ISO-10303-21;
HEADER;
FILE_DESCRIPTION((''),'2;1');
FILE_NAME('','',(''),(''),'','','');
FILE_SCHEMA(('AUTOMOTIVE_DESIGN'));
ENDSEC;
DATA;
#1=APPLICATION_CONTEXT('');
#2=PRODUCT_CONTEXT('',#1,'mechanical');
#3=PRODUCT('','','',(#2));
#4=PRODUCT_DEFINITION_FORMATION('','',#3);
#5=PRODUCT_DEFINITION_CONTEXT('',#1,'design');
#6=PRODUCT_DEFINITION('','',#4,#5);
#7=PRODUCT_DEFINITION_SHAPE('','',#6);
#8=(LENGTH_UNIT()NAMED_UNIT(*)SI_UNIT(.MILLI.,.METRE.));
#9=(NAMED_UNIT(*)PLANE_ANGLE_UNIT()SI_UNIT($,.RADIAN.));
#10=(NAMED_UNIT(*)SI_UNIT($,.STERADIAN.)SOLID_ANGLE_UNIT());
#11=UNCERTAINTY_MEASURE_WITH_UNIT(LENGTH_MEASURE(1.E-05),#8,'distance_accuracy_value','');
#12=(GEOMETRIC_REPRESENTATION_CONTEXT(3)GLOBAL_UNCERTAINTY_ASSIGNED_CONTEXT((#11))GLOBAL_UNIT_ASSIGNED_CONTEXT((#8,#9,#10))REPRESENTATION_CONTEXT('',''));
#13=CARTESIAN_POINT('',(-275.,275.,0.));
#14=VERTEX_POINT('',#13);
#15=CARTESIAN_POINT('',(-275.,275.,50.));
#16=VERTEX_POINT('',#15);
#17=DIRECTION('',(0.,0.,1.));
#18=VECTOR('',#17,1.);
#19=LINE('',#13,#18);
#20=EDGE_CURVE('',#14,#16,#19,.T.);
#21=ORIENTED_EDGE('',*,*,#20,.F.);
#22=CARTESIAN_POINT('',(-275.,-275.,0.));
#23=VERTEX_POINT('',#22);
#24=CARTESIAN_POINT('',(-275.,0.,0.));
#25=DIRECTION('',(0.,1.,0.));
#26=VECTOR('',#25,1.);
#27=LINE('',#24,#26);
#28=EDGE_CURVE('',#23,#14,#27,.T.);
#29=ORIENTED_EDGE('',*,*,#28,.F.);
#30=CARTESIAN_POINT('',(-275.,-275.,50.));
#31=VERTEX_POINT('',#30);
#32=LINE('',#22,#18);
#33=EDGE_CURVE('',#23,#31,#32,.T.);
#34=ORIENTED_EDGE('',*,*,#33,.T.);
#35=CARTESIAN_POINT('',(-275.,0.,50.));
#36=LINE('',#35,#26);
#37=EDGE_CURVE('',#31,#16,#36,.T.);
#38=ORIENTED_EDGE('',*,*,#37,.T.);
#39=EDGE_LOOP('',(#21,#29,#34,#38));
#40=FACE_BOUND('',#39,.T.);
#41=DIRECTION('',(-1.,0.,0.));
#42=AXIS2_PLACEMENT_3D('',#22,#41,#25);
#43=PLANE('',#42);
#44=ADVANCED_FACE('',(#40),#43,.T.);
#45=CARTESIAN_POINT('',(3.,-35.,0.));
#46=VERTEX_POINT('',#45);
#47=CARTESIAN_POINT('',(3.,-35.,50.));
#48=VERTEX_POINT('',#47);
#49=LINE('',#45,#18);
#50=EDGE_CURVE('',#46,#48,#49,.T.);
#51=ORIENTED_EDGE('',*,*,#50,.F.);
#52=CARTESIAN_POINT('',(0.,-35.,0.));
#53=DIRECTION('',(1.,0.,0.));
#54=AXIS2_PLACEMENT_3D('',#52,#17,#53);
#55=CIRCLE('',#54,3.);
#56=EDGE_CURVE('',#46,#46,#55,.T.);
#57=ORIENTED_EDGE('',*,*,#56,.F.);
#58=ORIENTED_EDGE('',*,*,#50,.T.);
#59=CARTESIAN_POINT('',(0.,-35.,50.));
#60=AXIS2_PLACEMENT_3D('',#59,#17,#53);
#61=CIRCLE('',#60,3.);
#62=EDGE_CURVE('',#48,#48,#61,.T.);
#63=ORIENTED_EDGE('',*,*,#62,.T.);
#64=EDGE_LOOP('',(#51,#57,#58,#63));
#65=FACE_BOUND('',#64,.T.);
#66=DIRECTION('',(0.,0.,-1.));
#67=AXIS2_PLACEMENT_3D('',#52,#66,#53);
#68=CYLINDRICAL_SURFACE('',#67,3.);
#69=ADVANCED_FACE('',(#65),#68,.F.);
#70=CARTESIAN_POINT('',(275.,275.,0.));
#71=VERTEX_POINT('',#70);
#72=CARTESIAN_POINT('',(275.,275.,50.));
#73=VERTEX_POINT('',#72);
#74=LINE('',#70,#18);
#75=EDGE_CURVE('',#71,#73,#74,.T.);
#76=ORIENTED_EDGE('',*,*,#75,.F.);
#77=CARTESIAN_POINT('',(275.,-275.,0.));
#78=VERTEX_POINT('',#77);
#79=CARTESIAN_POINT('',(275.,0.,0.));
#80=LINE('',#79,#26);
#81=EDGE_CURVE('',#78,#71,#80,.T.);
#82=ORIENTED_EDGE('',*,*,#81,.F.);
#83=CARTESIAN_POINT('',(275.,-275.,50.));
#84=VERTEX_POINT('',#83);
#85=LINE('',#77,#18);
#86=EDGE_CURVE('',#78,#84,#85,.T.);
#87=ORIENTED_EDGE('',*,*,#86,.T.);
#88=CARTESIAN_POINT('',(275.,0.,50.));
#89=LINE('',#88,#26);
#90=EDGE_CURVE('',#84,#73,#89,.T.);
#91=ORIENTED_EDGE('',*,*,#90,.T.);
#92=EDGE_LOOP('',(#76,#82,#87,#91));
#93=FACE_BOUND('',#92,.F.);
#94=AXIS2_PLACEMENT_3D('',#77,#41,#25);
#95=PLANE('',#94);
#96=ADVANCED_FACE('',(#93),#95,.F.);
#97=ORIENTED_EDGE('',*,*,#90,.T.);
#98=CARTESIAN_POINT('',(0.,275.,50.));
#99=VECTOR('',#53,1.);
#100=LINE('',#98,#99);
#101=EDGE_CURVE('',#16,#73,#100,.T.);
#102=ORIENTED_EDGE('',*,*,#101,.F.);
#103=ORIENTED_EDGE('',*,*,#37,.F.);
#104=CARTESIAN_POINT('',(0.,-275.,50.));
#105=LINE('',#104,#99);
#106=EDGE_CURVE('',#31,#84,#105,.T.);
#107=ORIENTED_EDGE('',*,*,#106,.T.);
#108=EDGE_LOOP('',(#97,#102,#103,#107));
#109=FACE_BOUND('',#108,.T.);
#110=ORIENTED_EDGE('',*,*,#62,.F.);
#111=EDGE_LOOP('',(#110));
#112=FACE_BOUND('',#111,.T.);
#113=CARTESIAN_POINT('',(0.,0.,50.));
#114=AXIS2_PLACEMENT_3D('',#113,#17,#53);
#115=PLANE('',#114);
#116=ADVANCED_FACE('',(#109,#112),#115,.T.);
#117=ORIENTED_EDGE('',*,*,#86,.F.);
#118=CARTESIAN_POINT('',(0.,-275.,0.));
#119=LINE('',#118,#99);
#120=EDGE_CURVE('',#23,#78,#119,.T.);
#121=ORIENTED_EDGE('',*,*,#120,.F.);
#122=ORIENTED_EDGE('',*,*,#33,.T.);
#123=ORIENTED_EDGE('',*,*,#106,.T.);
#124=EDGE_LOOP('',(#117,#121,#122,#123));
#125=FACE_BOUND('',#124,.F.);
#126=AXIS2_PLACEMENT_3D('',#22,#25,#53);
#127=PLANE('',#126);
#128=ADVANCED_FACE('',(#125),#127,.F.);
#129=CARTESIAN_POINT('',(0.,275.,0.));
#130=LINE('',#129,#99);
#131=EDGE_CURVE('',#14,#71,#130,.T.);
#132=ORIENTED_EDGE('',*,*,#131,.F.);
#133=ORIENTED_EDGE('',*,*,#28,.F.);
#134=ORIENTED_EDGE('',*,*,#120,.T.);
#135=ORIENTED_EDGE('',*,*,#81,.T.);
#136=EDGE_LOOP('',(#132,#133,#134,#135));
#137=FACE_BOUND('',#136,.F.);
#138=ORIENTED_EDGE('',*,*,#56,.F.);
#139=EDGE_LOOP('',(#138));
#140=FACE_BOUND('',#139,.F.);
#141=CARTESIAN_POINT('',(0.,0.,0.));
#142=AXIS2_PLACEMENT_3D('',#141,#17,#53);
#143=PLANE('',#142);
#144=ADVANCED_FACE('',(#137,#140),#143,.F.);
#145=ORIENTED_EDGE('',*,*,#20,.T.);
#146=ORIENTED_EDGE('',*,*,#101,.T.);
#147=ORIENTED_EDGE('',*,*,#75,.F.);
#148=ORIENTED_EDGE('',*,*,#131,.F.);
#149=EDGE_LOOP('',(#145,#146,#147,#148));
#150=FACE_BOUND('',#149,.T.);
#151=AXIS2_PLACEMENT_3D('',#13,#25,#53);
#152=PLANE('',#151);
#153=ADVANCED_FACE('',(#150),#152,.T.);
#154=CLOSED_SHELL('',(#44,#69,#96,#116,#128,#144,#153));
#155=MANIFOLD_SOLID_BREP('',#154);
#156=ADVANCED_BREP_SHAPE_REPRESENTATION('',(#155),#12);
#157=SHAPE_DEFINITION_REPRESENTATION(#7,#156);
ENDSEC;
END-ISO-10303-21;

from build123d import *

# Parameters (mm, degrees)
F0_W     = 550
F0_H     = 550
F0_R     = 3
F0_W_2   = 50
F0_H_2   = 50
F1_DEPTH = 50


with BuildPart() as f1:
    # F0 (on Top) → F1 (new body)
    with BuildSketch(Plane.XY):
        Rectangle(F0_W, F0_H)
        Polygon((222.5, 272.5), (272.5, 272.5), (272.5, 222.5), (272.5, -222.5), (272.5, -272.5), (222.5, -272.5), (-222.5, -272.5), (-272.5, -272.5), (-272.5, -222.5), (-272.5, 222.5), (-272.5, 272.5), (-222.5, 272.5), align=None, mode=Mode.SUBTRACT)
        Polygon((222.5, 222.5), (222.5, 272.5), (-222.5, 272.5), (-222.5, 222.5), (-272.5, 222.5), (-272.5, -222.5), (-222.5, -222.5), (-222.5, -272.5), (222.5, -272.5), (222.5, -222.5), (272.5, -222.5), (272.5, 222.5), align=None)
        with Locations((0, -35)):
            Circle(F0_R, mode=Mode.SUBTRACT)
        with Locations((-247.5, 247.5)):
            Rectangle(F0_W_2, F0_H_2)
        with Locations((247.5, -247.5)):
            Rectangle(F0_W_2, F0_H_2)
        with Locations((247.5, 247.5)):
            Rectangle(F0_W_2, F0_H_2)
        with Locations((-247.5, -247.5)):
            Rectangle(F0_W_2, F0_H_2)
    extrude(amount=F1_DEPTH)


solid = f1.part
